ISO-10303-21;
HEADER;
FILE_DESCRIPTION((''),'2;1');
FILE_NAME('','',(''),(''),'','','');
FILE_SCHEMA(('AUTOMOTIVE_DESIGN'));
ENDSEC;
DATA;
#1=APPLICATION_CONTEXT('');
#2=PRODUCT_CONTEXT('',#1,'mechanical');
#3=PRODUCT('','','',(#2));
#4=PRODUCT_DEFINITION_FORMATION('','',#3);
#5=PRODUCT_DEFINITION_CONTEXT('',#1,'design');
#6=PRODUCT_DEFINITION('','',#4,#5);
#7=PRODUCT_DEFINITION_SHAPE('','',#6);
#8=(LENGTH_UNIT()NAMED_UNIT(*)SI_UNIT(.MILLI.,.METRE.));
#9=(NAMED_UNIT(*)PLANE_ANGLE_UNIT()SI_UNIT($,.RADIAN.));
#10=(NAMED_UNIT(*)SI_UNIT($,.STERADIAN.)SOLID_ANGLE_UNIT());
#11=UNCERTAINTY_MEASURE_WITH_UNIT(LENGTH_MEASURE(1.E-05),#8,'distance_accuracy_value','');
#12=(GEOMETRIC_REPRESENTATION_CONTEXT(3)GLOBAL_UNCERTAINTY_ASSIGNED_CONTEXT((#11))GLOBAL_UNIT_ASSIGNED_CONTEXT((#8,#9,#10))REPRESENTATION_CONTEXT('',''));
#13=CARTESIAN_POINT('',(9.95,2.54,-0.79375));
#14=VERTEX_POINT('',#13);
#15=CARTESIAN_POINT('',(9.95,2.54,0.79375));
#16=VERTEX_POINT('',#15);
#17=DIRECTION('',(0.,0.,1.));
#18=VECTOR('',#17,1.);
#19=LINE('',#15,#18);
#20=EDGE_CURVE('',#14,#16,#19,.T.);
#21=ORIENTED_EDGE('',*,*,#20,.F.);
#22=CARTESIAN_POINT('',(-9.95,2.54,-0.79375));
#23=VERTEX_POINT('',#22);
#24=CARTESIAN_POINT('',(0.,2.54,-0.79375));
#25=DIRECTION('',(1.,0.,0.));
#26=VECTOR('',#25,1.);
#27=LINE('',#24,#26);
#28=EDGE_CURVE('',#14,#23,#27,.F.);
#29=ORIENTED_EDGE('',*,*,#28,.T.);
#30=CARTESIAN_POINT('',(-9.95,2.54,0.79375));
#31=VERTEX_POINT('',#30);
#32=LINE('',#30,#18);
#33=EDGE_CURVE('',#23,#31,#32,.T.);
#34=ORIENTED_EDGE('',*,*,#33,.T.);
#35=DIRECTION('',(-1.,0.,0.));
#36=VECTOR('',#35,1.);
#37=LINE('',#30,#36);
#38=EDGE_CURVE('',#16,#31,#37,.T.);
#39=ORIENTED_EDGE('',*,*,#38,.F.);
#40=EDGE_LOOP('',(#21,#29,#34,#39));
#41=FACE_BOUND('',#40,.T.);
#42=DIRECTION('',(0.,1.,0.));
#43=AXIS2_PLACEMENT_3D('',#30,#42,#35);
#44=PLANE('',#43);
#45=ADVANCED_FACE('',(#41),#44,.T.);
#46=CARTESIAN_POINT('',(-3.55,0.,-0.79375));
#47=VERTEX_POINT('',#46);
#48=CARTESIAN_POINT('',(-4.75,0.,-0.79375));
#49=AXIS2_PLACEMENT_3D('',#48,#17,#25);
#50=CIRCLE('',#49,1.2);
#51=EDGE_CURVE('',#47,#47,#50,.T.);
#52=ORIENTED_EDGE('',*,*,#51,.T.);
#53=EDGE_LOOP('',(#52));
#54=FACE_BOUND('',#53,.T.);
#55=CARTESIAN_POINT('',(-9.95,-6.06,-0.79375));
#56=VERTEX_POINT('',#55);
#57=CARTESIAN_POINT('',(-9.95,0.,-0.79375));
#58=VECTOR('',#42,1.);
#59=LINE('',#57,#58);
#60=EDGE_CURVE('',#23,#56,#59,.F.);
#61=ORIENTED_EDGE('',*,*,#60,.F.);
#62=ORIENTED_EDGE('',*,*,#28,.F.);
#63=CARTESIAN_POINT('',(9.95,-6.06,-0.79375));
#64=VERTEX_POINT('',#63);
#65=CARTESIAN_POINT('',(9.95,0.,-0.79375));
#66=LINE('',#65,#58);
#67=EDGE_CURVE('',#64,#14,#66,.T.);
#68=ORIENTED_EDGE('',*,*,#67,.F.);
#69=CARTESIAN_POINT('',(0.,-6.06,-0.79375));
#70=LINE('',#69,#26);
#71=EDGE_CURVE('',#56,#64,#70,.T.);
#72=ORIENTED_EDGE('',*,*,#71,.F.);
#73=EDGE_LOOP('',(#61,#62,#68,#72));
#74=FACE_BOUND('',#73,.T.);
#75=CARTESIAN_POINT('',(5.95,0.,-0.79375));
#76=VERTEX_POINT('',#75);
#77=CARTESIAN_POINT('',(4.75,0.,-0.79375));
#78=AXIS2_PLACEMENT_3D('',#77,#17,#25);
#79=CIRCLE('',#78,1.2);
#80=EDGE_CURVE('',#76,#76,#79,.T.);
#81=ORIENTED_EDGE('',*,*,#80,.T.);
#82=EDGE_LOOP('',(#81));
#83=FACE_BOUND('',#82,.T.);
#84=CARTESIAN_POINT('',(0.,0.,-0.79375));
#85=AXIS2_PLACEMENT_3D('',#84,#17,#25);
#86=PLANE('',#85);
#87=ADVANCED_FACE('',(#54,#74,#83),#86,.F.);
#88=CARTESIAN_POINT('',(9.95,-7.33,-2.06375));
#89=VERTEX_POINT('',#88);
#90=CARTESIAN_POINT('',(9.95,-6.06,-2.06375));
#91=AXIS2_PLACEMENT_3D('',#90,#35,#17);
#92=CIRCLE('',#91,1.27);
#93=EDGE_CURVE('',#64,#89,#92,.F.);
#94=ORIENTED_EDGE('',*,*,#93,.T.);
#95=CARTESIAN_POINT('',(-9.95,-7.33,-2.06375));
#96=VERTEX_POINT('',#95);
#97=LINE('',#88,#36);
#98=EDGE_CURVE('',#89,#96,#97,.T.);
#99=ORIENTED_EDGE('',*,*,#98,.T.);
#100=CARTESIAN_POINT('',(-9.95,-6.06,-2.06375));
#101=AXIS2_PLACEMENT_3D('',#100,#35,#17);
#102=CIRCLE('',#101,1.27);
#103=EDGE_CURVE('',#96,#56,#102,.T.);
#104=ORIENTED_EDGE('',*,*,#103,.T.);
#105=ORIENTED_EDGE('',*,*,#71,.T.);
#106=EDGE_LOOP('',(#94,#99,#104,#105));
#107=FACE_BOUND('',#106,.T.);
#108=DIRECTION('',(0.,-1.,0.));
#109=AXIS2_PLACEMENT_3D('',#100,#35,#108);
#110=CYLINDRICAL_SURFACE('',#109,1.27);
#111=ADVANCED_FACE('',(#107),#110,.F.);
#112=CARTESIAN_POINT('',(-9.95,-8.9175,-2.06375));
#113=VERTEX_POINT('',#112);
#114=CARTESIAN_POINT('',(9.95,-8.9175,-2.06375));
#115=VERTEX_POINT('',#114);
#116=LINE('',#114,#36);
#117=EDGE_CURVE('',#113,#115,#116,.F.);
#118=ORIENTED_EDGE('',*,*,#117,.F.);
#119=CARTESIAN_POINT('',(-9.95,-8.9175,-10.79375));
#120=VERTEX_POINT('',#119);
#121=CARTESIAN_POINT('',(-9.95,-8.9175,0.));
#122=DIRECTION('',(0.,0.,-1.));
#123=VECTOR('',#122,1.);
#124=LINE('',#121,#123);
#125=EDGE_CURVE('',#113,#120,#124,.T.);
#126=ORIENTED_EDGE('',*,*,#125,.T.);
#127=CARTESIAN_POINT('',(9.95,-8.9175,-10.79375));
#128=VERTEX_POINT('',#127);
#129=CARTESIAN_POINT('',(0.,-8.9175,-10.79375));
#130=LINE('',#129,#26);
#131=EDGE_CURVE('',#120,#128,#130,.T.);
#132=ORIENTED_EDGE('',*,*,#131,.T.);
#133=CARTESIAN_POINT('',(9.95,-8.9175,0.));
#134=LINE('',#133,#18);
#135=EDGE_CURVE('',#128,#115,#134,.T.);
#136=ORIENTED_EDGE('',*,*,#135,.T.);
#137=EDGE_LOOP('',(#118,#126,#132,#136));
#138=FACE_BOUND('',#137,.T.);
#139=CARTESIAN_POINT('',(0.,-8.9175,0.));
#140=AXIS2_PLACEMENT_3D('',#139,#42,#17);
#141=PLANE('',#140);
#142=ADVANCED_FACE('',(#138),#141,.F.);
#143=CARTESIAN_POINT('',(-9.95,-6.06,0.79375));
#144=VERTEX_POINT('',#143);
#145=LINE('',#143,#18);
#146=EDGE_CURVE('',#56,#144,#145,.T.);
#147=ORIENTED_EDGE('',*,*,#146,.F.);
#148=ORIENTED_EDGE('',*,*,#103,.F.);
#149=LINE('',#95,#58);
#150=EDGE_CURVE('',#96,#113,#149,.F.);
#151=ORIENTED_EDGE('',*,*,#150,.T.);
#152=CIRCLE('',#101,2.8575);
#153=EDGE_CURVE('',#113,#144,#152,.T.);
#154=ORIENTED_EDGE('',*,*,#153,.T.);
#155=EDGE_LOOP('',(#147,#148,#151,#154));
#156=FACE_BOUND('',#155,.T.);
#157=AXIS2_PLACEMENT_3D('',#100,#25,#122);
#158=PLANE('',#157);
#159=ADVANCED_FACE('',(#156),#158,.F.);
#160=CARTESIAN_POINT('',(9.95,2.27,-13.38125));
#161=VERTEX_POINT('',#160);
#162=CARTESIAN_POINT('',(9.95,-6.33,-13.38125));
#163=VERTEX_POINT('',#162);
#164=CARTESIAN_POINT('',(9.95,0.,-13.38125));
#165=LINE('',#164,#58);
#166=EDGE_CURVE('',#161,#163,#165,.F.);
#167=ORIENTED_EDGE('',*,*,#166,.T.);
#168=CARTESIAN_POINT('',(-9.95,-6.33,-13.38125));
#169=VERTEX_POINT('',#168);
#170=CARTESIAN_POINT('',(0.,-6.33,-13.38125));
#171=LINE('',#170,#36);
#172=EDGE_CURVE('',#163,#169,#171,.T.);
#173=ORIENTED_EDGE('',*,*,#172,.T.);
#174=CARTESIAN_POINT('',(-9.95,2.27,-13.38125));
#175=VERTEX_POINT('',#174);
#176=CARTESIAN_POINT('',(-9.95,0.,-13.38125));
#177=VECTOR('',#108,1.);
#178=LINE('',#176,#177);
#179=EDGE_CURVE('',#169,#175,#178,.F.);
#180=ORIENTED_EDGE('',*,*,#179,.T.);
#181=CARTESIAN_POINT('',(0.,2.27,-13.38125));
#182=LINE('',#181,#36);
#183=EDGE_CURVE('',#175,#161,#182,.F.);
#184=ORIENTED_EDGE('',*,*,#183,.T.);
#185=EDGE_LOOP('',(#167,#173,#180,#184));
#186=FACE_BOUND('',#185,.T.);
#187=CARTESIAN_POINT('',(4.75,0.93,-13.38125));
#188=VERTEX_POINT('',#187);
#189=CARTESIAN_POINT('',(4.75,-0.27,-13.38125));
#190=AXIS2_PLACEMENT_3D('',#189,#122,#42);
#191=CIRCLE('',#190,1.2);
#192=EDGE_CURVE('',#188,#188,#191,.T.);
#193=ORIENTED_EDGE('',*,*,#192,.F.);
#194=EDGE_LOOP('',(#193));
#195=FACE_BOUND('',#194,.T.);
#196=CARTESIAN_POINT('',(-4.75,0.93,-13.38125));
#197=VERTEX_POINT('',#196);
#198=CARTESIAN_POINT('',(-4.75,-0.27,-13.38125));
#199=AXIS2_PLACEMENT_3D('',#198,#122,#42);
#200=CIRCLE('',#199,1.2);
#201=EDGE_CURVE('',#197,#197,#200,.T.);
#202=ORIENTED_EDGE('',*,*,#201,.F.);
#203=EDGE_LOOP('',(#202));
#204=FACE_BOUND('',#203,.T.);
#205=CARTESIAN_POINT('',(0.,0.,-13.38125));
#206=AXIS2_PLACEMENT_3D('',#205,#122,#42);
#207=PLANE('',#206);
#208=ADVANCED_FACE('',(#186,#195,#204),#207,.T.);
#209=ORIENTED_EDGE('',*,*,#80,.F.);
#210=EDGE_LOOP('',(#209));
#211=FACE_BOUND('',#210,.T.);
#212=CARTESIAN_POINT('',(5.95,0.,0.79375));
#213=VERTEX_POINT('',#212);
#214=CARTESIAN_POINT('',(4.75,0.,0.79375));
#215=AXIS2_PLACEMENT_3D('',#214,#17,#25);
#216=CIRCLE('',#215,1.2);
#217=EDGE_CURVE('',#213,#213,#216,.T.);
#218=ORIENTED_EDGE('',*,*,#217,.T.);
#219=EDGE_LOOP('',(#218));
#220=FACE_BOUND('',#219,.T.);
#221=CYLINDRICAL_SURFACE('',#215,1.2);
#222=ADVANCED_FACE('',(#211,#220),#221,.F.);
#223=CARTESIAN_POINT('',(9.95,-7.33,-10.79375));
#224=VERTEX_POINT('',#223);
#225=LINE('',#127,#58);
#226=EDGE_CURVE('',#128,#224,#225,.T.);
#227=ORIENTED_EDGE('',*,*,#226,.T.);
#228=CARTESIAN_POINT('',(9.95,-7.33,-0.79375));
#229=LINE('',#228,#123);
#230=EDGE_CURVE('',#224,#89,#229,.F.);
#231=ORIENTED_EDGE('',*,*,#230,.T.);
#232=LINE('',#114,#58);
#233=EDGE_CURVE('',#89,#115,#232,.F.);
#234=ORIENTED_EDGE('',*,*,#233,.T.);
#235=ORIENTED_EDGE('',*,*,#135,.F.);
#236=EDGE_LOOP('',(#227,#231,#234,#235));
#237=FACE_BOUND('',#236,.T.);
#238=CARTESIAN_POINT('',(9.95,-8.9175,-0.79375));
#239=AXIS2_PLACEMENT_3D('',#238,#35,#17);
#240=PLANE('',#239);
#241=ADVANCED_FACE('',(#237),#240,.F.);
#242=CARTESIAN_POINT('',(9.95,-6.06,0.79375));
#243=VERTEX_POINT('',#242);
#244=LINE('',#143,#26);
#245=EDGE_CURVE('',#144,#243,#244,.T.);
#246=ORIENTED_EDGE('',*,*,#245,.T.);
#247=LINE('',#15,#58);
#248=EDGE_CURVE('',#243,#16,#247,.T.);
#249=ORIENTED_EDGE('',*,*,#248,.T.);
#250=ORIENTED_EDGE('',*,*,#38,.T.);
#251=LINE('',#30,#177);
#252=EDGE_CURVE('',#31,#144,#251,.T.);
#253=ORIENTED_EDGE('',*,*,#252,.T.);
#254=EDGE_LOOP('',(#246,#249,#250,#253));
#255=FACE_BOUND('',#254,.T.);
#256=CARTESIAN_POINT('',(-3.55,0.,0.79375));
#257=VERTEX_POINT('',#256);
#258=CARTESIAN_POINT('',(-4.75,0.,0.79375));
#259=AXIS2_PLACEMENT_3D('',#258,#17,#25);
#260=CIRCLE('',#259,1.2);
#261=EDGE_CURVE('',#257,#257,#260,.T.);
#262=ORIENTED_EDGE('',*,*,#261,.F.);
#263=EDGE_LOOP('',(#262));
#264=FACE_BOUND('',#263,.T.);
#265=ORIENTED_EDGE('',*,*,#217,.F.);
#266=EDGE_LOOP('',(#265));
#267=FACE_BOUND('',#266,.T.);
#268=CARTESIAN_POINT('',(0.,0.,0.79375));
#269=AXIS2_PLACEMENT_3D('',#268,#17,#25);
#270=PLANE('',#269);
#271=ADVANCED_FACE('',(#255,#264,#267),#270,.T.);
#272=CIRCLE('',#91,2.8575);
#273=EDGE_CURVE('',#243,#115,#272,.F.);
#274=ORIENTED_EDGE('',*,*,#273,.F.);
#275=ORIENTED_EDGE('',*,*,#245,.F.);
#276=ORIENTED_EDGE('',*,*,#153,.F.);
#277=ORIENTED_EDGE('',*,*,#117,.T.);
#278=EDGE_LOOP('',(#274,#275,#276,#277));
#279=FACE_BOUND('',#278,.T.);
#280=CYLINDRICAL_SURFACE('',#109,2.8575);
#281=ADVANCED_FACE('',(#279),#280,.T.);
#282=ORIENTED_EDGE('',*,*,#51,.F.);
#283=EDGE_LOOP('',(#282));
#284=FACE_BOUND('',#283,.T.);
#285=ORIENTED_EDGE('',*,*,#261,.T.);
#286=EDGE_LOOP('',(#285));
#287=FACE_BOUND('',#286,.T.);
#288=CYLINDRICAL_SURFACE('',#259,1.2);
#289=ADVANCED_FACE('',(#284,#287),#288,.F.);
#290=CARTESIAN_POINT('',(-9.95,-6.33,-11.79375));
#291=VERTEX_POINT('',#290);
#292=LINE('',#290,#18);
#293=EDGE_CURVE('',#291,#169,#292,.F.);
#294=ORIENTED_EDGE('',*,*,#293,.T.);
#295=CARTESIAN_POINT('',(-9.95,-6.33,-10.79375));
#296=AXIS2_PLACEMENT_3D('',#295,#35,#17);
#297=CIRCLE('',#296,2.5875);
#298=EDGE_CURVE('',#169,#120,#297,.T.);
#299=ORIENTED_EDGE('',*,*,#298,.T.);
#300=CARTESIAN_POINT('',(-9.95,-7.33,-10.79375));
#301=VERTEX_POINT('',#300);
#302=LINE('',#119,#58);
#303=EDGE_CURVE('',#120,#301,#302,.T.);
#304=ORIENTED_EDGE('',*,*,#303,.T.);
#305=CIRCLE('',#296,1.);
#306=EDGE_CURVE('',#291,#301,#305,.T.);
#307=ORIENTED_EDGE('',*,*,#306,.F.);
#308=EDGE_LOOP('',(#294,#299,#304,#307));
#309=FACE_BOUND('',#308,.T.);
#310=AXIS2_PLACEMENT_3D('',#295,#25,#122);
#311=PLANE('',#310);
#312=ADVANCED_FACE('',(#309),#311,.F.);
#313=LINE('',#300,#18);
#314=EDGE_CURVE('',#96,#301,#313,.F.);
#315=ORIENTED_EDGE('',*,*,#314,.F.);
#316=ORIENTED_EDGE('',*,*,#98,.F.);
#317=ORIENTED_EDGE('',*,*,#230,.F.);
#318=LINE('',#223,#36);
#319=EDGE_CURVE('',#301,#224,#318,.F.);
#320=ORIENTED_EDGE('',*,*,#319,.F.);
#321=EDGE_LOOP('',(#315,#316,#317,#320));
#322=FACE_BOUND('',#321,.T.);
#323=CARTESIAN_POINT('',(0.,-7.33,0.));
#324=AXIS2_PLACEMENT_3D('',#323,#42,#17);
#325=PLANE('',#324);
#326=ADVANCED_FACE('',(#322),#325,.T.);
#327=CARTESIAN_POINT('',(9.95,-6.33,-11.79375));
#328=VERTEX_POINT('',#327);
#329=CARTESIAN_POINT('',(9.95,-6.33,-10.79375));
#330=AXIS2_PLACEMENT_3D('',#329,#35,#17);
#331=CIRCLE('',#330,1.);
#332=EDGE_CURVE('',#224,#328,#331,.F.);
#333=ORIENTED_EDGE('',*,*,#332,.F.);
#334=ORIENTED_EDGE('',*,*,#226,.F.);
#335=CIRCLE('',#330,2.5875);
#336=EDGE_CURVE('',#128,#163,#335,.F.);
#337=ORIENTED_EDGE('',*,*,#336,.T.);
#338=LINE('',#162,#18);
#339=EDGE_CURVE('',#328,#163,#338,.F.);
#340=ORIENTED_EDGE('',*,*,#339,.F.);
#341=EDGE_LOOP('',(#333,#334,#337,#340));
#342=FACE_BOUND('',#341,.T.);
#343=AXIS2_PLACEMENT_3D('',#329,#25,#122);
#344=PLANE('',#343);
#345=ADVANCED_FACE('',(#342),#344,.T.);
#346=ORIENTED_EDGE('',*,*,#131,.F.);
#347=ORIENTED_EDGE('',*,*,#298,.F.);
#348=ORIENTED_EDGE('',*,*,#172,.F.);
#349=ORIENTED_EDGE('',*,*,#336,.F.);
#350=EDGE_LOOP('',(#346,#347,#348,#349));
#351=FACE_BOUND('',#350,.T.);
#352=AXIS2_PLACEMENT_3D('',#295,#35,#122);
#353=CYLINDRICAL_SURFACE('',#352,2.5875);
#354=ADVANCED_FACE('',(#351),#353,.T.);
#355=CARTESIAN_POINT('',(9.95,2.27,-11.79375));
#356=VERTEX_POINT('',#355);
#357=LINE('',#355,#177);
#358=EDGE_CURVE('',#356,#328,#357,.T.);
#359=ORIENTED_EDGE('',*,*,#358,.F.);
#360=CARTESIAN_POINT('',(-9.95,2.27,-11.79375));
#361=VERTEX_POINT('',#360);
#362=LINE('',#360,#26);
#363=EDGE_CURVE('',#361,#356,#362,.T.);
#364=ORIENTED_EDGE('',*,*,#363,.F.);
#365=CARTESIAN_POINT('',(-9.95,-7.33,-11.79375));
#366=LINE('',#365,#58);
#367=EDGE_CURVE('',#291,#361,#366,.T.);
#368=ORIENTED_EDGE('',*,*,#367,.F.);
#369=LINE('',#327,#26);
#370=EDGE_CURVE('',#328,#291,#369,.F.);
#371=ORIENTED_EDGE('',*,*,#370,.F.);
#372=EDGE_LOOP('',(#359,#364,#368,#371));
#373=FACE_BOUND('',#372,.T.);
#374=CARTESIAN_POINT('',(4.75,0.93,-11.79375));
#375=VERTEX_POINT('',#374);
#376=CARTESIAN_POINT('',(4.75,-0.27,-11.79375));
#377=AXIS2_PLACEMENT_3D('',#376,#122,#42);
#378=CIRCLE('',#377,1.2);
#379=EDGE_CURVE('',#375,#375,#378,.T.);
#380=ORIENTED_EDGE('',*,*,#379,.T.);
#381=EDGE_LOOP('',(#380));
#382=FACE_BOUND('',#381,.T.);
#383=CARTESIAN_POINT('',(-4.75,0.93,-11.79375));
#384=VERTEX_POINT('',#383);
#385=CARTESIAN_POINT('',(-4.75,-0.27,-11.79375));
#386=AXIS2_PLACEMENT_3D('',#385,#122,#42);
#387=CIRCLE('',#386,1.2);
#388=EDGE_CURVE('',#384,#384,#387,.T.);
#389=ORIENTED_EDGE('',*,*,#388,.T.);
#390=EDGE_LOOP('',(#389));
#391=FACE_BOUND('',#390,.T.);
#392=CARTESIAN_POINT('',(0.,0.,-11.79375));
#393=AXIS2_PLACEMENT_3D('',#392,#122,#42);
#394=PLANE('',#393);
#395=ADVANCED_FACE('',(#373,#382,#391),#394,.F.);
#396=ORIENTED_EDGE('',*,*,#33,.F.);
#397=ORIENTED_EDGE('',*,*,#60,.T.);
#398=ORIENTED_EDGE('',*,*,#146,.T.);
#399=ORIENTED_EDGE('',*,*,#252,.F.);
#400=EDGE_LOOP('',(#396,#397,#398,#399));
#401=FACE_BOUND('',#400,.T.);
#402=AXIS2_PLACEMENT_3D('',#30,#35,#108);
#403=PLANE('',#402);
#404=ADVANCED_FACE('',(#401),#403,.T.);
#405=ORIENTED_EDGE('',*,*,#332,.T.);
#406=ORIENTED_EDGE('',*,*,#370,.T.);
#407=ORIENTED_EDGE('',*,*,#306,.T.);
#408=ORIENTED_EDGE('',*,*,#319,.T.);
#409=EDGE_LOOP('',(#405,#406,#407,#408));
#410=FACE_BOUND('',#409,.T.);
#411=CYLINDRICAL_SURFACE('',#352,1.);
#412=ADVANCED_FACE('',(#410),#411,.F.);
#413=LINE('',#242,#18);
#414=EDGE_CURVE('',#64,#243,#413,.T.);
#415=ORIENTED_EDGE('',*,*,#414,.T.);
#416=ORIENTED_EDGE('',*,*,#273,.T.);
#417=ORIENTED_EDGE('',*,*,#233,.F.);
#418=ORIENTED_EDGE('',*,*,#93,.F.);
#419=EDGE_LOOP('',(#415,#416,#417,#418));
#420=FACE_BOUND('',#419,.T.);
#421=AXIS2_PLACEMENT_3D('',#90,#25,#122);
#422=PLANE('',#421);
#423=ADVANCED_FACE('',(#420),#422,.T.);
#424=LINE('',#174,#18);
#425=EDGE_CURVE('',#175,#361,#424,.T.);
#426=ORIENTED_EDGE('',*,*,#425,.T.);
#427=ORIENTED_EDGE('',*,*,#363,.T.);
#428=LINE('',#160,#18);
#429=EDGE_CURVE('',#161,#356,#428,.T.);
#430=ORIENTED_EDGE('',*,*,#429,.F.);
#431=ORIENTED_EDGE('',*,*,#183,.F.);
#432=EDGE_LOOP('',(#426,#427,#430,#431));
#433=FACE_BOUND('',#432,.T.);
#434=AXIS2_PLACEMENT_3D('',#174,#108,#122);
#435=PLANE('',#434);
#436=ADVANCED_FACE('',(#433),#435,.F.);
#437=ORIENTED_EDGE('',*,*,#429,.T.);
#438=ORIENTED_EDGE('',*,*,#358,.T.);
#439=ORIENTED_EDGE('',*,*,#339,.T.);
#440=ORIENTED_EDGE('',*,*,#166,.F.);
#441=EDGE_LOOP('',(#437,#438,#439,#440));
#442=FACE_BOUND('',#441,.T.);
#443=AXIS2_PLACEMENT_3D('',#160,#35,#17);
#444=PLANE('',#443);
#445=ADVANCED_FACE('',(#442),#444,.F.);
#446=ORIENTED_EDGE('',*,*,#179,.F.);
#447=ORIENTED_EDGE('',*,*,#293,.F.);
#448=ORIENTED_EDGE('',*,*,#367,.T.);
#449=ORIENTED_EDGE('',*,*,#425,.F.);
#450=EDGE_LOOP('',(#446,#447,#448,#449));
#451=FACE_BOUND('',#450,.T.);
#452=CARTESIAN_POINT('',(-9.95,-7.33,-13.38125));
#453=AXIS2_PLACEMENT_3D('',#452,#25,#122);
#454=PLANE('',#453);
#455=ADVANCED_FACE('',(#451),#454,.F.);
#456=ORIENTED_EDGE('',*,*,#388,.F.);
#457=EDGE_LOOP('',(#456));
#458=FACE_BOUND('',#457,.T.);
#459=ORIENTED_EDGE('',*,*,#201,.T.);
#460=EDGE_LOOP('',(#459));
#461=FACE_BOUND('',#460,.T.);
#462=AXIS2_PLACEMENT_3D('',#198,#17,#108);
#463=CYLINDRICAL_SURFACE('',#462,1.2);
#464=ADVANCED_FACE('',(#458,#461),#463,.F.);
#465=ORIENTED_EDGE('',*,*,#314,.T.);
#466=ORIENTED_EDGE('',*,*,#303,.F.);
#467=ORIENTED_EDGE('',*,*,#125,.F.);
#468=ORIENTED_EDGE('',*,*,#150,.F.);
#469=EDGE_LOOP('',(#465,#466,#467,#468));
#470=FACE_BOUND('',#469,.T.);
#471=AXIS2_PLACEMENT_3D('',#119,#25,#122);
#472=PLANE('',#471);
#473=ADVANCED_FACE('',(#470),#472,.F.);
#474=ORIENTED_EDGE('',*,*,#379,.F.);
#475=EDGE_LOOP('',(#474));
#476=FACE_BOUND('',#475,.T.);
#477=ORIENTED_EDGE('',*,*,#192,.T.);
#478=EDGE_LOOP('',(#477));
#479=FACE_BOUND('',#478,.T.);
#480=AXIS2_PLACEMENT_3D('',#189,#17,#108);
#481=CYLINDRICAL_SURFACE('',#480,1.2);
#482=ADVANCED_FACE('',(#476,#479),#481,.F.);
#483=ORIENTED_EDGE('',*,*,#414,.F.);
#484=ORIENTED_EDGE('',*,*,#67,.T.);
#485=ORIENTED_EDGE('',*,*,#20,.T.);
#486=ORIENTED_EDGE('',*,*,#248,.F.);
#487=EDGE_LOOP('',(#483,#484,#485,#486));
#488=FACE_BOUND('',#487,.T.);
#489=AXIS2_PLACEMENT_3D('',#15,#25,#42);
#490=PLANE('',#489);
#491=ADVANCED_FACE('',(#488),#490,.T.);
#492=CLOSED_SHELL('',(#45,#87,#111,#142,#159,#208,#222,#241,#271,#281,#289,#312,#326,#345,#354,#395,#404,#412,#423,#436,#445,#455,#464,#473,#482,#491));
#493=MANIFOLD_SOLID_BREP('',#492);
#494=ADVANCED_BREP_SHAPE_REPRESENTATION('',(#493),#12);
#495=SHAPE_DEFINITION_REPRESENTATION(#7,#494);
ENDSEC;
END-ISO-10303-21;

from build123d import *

# Parameters (mm, degrees)
SKETCH1_W                = 19.9
SKETCH1_H                = 8.6
SKETCH1_R                = 1.2
BOSS_EXTRUDE1_DEPTH      = 0.79375
CONVERT_SOLID2_START     = -0.79375
CONVERT_SOLID2_OUTLINE_W = 19.9
CONVERT_SOLID2_OUTLINE_H = 8.6
CONVERT_SOLID2_OUTLINE_R = 1.2
CONVERT_SOLID2_DEPTH     = 0.79375
EDGE_FLANGE1_DEPTH       = 19.9
EDGE_FLANGE2_DEPTH       = 19.9
EDGE_FLANGE2_START       = 1.5875
EDGE_FLANGE2_PROFILE_W   = 19.9
EDGE_FLANGE2_PROFILE_H   = 8.6
EDGE_FLANGE2_PROFILE_R   = 1.2
EDGE_FLANGE2_FLAT_DEPTH  = 1.5875


# Read off the part's stored shape, not the designer's step: Convert-Solid2
# Sheet-metal steps are written as plain solids
with BuildPart() as part:
    # Sketch1 → Boss-Extrude1 (new body)
    with BuildSketch(Plane.XY):
        with Locations((0, -1.76)):
            Rectangle(SKETCH1_W, SKETCH1_H)
        with Locations((-4.75, 0)):
            Circle(SKETCH1_R, mode=Mode.SUBTRACT)
        with Locations((4.75, 0)):
            Circle(SKETCH1_R, mode=Mode.SUBTRACT)
    extrude(amount=BOSS_EXTRUDE1_DEPTH)

    # Convert-Solid2 outline → Convert-Solid2 (add)
    with BuildSketch(Plane.XY.offset(CONVERT_SOLID2_START)):
        with Locations((0, -1.76)):
            Rectangle(CONVERT_SOLID2_OUTLINE_W, CONVERT_SOLID2_OUTLINE_H)
        with Locations((-4.75, 0)):
            Circle(CONVERT_SOLID2_OUTLINE_R, mode=Mode.SUBTRACT)
        with Locations((4.75, 0)):
            Circle(CONVERT_SOLID2_OUTLINE_R, mode=Mode.SUBTRACT)
    extrude(amount=CONVERT_SOLID2_DEPTH)

    # Edge-Flange1 section (across the edge) → Edge-Flange1 (add)
    with BuildSketch(Plane(origin=(9.95, -7.33, -0.79375), x_dir=(0, 1, 0), z_dir=(-1, 0, 0))):
        with BuildLine():
            Line((-1.5875, 1.27), (-1.5875, 10))
            Line((-1.5875, 10), (0, 10))
            Line((0, 10), (0, 1.27))
            ThreePointArc((0, 1.27), (0.371974388, 0.371974388), (1.27, 0))
            Line((1.27, 0), (1.27, -1.5875))
            ThreePointArc((1.27, -1.5875), (-0.750557627, -0.750557627), (-1.5875, 1.27))
        make_face()
    extrude(amount=EDGE_FLANGE1_DEPTH)

    # Edge-Flange2 bend section (across the edge) → Edge-Flange2 (add)
    with BuildSketch(Plane(origin=(9.95, -7.33, -11.79375), x_dir=(0, 0, 1), z_dir=(-1, 0, 0))):
        with BuildLine():
            Line((-1.5875, 1), (0, 1))
            ThreePointArc((0, 1), (0.292893219, 0.292893219), (1, 0))
            Line((1, 0), (1, -1.5875))
            ThreePointArc((1, -1.5875), (-0.829638796, -0.829638796), (-1.5875, 1))
        make_face()
    extrude(amount=EDGE_FLANGE2_DEPTH)

    # Edge-Flange2 profile (on flange) → Edge-Flange2 flat (add)
    with BuildSketch(Plane(origin=(0, -7.33, -11.79375), x_dir=(-1, 0, 0), z_dir=(0, 0, -1)).offset(EDGE_FLANGE2_START)):
        with Locations((0, 5.3)):
            Rectangle(EDGE_FLANGE2_PROFILE_W, EDGE_FLANGE2_PROFILE_H)
        with Locations((-4.75, 7.06)):
            Circle(EDGE_FLANGE2_PROFILE_R, mode=Mode.SUBTRACT)
        with Locations((4.75, 7.06)):
            Circle(EDGE_FLANGE2_PROFILE_R, mode=Mode.SUBTRACT)
    extrude(amount=-EDGE_FLANGE2_FLAT_DEPTH)


solid = part.part
